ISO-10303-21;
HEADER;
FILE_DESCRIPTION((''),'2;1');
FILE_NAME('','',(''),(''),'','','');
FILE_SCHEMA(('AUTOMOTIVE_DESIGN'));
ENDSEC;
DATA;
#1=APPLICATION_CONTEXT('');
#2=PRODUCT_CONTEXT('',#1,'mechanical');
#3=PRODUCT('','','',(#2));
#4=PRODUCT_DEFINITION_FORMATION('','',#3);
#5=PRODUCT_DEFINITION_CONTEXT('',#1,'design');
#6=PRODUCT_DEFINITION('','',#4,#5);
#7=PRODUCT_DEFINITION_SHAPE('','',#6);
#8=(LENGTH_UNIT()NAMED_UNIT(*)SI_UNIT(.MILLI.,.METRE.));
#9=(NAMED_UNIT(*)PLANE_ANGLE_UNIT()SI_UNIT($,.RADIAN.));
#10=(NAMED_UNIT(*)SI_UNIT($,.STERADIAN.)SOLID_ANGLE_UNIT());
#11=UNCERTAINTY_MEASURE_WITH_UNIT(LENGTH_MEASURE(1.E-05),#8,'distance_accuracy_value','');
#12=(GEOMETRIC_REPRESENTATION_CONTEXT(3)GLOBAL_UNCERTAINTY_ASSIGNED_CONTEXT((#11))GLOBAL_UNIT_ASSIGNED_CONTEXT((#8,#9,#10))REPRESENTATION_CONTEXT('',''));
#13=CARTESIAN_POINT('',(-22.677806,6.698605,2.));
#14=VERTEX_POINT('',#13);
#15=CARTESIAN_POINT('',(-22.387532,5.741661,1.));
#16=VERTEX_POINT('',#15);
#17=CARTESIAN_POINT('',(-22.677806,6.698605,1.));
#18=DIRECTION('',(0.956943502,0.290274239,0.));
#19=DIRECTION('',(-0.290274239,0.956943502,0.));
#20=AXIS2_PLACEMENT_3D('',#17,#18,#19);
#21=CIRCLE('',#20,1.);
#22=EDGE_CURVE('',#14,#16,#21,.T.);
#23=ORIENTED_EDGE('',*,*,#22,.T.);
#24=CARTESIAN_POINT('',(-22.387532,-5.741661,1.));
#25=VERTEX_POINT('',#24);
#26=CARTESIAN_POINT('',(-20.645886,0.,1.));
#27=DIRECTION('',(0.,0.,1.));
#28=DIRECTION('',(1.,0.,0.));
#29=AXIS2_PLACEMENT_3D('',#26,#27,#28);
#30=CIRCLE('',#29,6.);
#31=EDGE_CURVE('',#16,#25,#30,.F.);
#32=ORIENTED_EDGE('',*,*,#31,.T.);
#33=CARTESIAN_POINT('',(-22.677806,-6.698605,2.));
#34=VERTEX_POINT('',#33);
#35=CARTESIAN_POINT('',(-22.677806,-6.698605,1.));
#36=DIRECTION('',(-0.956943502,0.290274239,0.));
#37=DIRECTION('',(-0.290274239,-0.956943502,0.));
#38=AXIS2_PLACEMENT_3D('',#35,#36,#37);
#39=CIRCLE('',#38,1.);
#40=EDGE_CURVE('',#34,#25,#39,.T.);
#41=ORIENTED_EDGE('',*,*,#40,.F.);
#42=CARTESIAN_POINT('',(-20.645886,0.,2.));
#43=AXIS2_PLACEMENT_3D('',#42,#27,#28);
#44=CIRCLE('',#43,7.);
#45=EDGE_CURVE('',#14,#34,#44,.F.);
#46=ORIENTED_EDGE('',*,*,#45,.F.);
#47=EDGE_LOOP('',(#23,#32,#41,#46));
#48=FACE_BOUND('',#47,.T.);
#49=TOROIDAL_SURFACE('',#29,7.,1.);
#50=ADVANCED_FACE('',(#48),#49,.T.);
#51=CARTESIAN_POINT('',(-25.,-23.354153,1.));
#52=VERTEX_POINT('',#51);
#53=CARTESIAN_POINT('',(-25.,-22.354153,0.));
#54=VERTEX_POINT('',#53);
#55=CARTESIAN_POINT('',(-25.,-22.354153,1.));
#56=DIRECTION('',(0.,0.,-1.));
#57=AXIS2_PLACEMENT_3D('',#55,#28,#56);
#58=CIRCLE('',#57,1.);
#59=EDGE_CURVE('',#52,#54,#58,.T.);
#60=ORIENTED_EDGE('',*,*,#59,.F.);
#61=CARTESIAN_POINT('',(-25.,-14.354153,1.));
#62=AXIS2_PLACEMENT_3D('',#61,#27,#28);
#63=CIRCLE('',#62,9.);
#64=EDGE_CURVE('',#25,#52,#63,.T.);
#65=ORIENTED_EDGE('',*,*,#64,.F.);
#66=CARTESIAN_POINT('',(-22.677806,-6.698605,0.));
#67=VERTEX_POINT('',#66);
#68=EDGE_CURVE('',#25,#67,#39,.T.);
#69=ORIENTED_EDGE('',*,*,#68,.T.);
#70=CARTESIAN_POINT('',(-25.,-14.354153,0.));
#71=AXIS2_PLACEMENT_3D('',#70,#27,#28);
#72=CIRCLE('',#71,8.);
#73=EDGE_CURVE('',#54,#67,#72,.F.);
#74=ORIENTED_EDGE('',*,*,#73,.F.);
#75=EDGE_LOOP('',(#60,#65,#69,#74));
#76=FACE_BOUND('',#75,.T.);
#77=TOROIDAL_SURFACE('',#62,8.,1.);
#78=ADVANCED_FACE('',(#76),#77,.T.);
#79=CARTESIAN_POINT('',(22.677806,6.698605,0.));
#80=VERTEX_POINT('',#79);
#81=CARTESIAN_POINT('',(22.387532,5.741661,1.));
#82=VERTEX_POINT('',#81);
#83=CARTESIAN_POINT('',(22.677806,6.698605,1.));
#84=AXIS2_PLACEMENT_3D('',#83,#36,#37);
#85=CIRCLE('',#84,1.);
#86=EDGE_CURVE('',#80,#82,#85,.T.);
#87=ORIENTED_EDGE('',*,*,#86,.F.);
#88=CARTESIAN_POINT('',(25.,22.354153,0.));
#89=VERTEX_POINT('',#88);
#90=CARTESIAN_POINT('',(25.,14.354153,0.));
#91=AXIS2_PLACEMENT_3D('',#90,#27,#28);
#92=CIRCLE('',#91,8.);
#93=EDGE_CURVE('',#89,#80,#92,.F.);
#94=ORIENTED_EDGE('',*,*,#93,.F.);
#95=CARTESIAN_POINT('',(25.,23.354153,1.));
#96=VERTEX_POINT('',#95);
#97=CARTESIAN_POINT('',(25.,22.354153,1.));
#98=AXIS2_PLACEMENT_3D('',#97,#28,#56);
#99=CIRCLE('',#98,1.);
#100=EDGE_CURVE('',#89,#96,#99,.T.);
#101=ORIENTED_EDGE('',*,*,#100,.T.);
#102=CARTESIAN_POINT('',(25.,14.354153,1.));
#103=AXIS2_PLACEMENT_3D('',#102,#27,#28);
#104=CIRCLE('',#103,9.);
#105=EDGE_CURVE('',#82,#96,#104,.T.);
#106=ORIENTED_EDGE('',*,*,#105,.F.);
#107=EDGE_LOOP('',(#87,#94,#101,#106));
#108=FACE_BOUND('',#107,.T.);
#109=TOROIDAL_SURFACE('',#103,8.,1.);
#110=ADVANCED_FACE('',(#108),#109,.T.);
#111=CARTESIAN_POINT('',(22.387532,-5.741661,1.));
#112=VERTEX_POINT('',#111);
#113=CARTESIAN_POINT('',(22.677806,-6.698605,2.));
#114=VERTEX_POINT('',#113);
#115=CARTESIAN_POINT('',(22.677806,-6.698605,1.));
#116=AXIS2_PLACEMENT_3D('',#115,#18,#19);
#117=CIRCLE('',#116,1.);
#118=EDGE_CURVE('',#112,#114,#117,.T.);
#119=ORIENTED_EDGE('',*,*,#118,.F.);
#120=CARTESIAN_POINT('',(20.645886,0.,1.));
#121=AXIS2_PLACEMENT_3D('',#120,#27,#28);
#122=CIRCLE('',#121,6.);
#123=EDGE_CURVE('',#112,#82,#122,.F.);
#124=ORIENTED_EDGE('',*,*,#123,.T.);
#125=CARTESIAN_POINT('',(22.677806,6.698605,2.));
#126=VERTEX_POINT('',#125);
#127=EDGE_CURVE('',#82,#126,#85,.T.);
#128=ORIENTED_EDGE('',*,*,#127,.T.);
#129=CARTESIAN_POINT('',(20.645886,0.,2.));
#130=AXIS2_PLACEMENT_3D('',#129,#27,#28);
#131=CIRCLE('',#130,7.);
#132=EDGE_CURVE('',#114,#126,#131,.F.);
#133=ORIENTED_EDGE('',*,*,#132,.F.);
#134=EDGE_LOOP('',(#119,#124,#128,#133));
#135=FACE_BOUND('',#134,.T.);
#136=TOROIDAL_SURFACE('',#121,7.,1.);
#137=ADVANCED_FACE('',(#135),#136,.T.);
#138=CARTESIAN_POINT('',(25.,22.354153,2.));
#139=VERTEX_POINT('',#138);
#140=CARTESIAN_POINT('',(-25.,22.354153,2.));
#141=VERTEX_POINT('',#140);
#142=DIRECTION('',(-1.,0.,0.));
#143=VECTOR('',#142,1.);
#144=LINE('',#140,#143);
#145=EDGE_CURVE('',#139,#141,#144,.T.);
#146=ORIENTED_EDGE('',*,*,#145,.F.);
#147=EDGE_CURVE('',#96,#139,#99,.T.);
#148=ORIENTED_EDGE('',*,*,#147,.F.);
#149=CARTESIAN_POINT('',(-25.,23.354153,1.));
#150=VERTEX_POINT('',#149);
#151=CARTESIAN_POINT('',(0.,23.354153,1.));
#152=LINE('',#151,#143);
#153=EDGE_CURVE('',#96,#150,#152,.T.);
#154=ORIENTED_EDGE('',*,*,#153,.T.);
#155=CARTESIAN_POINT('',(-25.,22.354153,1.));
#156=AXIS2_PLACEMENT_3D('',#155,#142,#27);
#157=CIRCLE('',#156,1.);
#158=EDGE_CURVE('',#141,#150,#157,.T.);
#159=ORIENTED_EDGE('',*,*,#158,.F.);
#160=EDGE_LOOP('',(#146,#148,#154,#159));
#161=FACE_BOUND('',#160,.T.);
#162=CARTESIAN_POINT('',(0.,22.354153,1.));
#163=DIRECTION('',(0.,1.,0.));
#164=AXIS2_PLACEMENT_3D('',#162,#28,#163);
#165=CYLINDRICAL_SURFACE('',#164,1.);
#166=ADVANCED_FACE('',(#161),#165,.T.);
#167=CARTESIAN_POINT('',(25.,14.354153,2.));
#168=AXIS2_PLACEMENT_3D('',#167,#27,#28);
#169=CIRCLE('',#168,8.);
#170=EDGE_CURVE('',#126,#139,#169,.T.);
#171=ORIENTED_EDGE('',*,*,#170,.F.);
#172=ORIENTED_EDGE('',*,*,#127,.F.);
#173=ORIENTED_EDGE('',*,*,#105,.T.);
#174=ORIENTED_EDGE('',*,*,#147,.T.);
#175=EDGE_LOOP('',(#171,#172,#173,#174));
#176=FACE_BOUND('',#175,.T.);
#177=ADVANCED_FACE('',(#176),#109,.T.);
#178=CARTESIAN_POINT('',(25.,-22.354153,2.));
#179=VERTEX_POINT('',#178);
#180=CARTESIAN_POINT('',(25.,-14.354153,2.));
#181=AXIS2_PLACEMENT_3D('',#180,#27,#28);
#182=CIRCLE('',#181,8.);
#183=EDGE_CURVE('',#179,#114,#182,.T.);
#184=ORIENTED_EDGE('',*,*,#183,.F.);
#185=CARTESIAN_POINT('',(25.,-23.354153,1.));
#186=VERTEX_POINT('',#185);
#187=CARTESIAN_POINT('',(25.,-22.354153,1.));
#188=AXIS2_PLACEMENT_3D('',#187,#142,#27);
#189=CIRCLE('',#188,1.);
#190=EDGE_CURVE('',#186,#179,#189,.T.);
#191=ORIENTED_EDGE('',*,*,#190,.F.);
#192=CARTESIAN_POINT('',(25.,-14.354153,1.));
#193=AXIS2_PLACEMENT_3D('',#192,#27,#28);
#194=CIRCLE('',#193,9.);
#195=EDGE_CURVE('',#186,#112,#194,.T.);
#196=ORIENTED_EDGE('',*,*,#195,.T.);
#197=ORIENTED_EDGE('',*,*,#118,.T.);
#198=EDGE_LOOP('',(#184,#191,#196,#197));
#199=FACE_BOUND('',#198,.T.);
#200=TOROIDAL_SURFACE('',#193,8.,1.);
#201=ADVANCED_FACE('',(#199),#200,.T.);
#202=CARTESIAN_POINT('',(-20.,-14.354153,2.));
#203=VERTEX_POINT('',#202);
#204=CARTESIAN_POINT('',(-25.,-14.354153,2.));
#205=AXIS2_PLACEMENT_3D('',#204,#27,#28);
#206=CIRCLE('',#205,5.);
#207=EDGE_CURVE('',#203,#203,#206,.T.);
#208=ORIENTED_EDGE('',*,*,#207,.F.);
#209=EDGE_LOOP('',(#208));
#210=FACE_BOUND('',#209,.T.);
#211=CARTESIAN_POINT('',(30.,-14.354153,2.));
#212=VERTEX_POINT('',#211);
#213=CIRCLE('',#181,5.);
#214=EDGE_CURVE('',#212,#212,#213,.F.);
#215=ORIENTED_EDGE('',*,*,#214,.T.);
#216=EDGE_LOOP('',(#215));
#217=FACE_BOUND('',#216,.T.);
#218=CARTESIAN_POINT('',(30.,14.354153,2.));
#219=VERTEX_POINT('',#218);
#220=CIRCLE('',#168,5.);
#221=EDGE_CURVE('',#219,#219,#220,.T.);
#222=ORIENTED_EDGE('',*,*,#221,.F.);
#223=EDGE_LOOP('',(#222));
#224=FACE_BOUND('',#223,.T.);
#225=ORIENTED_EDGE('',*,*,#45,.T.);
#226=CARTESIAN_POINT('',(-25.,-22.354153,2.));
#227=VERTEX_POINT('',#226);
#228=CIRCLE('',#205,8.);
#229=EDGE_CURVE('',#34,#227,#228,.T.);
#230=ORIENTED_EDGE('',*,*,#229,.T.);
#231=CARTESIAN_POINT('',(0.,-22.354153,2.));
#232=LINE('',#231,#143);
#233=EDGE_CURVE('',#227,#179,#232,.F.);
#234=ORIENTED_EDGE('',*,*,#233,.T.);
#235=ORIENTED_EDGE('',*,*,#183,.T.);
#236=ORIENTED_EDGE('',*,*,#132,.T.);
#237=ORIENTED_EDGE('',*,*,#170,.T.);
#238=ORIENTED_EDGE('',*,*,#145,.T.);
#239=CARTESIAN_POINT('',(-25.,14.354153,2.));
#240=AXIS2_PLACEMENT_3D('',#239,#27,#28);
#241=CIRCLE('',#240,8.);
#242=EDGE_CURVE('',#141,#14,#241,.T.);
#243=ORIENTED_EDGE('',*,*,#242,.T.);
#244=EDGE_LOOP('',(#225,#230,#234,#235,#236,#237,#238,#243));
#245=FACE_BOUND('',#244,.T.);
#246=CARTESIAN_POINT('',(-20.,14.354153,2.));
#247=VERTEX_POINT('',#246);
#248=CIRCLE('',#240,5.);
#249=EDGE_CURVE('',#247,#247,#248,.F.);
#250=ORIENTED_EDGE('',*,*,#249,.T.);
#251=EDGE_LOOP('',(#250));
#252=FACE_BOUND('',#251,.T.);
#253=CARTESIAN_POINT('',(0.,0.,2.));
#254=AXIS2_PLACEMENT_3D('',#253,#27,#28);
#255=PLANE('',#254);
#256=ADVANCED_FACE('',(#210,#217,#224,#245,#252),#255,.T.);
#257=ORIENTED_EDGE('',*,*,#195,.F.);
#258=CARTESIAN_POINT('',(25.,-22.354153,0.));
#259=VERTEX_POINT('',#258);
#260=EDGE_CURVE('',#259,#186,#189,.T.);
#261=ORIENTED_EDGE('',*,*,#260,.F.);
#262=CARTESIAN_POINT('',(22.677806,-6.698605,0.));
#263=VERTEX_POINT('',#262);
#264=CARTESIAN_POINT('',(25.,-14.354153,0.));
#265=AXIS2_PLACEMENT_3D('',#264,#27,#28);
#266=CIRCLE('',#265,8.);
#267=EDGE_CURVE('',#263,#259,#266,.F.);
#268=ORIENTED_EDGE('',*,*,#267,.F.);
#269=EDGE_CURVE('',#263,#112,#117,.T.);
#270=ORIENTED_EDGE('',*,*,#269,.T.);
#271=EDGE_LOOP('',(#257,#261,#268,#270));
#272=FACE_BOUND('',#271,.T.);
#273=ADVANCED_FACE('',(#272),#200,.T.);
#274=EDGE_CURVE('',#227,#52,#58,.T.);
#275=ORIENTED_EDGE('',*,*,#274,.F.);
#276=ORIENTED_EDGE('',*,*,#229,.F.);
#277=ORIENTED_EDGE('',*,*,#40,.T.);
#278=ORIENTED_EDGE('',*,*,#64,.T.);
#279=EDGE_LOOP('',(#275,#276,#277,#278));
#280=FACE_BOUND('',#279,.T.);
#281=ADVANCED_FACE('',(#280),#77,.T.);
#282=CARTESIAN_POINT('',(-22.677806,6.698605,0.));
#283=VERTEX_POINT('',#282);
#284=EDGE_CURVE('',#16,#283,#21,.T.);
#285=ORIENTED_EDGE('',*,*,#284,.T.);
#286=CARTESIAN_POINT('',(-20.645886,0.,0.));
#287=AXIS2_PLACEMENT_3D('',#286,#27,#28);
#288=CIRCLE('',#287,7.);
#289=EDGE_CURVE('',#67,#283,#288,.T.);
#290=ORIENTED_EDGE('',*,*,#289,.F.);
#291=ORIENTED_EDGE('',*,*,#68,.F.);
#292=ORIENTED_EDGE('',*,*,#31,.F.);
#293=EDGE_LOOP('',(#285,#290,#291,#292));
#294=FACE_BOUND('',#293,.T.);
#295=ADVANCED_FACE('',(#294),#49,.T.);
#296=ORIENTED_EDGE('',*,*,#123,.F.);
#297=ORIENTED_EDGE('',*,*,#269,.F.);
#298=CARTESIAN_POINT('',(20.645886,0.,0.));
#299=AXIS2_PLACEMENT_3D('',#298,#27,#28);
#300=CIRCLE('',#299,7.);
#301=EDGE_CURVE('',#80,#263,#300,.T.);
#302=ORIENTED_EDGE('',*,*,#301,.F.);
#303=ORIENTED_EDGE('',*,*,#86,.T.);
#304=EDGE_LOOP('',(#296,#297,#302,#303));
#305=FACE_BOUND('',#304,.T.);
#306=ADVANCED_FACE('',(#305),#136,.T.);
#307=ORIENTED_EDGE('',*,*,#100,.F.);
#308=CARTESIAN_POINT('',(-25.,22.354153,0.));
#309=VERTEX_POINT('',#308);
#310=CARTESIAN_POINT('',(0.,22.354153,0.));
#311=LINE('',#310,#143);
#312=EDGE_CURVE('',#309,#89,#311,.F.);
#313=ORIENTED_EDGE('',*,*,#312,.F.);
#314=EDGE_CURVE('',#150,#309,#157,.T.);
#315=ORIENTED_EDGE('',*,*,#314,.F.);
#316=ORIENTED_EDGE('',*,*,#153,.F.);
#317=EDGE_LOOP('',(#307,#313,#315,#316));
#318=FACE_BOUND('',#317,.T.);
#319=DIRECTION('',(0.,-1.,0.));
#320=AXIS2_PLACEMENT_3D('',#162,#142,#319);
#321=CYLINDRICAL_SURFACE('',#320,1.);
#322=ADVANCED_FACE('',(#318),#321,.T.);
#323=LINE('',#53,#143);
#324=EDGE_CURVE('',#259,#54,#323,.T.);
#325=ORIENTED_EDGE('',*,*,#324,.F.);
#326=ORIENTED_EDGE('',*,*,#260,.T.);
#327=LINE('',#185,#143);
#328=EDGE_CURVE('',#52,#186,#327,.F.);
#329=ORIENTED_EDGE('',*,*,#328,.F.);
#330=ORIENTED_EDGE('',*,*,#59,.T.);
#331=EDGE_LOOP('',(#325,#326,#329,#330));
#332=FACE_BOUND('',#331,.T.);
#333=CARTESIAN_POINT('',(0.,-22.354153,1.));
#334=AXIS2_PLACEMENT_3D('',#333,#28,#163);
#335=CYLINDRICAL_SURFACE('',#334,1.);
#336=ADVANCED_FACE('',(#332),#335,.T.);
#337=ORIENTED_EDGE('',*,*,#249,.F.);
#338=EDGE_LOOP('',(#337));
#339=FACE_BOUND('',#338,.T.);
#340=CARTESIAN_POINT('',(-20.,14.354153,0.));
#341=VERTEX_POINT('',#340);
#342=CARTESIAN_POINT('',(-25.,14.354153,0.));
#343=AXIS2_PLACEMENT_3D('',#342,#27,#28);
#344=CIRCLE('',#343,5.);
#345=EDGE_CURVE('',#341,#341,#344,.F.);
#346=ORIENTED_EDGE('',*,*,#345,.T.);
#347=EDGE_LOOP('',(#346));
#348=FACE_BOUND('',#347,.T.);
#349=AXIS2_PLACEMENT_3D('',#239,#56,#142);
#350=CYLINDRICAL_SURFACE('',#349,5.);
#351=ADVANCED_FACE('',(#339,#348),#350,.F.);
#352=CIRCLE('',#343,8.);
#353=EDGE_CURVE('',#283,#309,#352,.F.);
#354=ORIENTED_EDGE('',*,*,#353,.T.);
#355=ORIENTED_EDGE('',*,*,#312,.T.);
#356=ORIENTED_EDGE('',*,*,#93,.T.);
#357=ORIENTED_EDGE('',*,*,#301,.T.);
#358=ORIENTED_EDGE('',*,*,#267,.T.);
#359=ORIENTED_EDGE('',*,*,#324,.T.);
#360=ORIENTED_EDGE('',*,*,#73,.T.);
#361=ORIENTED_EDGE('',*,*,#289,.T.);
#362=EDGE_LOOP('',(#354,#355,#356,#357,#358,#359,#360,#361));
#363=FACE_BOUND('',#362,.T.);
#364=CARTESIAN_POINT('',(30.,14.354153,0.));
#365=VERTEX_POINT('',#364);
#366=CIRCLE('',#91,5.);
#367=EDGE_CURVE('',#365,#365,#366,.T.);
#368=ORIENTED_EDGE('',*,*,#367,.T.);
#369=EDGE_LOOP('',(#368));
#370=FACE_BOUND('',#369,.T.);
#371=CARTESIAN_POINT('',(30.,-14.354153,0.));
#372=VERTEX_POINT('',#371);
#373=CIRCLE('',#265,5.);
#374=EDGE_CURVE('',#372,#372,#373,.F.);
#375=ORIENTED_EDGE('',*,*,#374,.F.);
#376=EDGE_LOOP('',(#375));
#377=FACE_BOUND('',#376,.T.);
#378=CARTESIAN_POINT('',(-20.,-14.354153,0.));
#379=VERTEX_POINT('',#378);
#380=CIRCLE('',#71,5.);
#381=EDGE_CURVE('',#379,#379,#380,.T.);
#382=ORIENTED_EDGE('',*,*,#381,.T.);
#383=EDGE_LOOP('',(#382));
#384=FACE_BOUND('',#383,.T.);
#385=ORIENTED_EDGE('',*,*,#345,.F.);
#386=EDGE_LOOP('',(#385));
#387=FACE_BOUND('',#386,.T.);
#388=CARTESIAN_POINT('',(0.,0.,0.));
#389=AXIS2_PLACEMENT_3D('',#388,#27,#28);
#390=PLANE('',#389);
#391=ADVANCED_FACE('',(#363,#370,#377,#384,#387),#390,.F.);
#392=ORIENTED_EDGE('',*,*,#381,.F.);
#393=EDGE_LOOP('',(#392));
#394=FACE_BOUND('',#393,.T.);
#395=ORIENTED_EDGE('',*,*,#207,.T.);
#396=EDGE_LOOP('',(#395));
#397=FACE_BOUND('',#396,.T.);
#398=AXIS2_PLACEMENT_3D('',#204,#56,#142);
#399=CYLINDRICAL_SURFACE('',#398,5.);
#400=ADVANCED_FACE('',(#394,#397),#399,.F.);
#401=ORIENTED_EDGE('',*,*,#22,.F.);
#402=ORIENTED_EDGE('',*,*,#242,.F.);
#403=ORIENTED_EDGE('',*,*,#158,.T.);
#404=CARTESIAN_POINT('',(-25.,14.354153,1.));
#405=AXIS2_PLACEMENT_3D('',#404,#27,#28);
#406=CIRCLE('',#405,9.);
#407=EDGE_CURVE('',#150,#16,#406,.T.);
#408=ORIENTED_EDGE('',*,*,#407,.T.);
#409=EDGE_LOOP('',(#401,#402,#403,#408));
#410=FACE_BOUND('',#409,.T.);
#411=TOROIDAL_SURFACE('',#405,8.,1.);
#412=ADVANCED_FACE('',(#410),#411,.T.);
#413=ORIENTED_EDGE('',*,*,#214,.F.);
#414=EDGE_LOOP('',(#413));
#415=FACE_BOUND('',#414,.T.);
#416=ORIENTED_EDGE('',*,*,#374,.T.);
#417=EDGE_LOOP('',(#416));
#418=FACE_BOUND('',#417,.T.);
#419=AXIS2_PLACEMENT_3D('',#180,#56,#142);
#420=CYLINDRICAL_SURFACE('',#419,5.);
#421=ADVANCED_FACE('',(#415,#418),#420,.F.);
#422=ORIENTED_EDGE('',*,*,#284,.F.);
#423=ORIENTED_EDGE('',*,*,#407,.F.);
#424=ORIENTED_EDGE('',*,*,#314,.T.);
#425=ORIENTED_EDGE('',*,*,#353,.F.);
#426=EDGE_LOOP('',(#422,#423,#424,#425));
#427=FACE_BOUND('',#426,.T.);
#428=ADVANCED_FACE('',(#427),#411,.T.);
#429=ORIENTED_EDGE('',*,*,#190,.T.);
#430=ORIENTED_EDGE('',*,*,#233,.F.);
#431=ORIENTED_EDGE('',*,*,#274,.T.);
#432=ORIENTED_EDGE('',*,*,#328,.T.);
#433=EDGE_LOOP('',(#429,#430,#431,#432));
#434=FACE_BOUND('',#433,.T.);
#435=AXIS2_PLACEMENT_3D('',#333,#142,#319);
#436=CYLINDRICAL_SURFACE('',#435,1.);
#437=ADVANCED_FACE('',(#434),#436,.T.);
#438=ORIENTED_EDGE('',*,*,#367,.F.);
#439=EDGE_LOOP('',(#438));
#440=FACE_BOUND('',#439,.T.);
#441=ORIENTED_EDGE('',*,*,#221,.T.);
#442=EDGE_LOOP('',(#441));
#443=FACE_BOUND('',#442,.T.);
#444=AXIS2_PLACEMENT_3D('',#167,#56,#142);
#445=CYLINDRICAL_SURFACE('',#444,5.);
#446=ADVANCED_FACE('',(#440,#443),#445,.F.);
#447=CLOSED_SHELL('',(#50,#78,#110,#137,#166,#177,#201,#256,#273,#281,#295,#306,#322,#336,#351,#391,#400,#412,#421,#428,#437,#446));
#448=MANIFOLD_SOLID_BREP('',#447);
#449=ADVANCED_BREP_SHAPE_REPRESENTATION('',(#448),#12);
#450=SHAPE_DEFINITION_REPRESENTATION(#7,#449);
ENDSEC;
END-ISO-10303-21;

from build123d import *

# Parameters (mm, degrees)
SZKIC2_R                    = 5
DODANIE_WYCI_GNI_CIE1_DEPTH = 2
ZAOKR_GLENIE1_R             = 1


with BuildPart() as part:
    # Szkic2 → Dodanie-wyciągnięcie1 (new body)
    with BuildSketch(Plane.XY):
        with BuildLine():
            Line((25, 23.354152533), (-25, 23.354152533))
            ThreePointArc((-25, 23.354152533), (-33.902595792, 13.033626819), (-22.387531852, 5.741661013))
            ThreePointArc((-22.387531852, 5.741661013), (-14.64588642, 0), (-22.387531852, -5.741661013))
            ThreePointArc((-22.387531852, -5.741661013), (-33.902595792, -13.033626819), (-25, -23.354152533))
            Line((-25, -23.354152533), (25, -23.354152533))
            ThreePointArc((25, -23.354152533), (33.902595792, -13.033626819), (22.387531852, -5.741661013))
            ThreePointArc((22.387531852, -5.741661013), (14.64588642, 0), (22.387531852, 5.741661013))
            ThreePointArc((22.387531852, 5.741661013), (33.902595792, 13.033626819), (25, 23.354152533))
        make_face()
        with Locations((25, 14.354152533)):
            Circle(SZKIC2_R, mode=Mode.SUBTRACT)
        with Locations((-25, 14.354152533)):
            Circle(SZKIC2_R, mode=Mode.SUBTRACT)
        with Locations((25, -14.354152533)):
            Circle(SZKIC2_R, mode=Mode.SUBTRACT)
        with Locations((-25, -14.354152533)):
            Circle(SZKIC2_R, mode=Mode.SUBTRACT)
    extrude(amount=DODANIE_WYCI_GNI_CIE1_DEPTH)

    # Zaokrąglenie1
    zaokr_glenie1_edges = [part.edges().sort_by_distance(p)[0] for p in [
        (0, -23.354152533, 2),
        (0, -23.354152533, 0),
        (33.902595792, -13.033626819, 2),
        (33.902595792, -13.033626819, 0),
        (14.64588642, 0, 2),
        (14.64588642, 0, 0),
        (33.902595792, 13.033626819, 2),
        (33.902595792, 13.033626819, 0),
        (0, 23.354152533, 2),
        (0, 23.354152533, 0),
        (-33.902595792, 13.033626819, 2),
        (-33.902595792, 13.033626819, 0),
        (-33.902595792, -13.033626819, 2),
        (-33.902595792, -13.033626819, 0),
        (-14.64588642, 0, 2),
        (-14.64588642, 0, 0),
    ]]
    fillet(zaokr_glenie1_edges, radius=ZAOKR_GLENIE1_R - 0.0001)  # a hair under: the kernel refuses the full size


solid = part.part
